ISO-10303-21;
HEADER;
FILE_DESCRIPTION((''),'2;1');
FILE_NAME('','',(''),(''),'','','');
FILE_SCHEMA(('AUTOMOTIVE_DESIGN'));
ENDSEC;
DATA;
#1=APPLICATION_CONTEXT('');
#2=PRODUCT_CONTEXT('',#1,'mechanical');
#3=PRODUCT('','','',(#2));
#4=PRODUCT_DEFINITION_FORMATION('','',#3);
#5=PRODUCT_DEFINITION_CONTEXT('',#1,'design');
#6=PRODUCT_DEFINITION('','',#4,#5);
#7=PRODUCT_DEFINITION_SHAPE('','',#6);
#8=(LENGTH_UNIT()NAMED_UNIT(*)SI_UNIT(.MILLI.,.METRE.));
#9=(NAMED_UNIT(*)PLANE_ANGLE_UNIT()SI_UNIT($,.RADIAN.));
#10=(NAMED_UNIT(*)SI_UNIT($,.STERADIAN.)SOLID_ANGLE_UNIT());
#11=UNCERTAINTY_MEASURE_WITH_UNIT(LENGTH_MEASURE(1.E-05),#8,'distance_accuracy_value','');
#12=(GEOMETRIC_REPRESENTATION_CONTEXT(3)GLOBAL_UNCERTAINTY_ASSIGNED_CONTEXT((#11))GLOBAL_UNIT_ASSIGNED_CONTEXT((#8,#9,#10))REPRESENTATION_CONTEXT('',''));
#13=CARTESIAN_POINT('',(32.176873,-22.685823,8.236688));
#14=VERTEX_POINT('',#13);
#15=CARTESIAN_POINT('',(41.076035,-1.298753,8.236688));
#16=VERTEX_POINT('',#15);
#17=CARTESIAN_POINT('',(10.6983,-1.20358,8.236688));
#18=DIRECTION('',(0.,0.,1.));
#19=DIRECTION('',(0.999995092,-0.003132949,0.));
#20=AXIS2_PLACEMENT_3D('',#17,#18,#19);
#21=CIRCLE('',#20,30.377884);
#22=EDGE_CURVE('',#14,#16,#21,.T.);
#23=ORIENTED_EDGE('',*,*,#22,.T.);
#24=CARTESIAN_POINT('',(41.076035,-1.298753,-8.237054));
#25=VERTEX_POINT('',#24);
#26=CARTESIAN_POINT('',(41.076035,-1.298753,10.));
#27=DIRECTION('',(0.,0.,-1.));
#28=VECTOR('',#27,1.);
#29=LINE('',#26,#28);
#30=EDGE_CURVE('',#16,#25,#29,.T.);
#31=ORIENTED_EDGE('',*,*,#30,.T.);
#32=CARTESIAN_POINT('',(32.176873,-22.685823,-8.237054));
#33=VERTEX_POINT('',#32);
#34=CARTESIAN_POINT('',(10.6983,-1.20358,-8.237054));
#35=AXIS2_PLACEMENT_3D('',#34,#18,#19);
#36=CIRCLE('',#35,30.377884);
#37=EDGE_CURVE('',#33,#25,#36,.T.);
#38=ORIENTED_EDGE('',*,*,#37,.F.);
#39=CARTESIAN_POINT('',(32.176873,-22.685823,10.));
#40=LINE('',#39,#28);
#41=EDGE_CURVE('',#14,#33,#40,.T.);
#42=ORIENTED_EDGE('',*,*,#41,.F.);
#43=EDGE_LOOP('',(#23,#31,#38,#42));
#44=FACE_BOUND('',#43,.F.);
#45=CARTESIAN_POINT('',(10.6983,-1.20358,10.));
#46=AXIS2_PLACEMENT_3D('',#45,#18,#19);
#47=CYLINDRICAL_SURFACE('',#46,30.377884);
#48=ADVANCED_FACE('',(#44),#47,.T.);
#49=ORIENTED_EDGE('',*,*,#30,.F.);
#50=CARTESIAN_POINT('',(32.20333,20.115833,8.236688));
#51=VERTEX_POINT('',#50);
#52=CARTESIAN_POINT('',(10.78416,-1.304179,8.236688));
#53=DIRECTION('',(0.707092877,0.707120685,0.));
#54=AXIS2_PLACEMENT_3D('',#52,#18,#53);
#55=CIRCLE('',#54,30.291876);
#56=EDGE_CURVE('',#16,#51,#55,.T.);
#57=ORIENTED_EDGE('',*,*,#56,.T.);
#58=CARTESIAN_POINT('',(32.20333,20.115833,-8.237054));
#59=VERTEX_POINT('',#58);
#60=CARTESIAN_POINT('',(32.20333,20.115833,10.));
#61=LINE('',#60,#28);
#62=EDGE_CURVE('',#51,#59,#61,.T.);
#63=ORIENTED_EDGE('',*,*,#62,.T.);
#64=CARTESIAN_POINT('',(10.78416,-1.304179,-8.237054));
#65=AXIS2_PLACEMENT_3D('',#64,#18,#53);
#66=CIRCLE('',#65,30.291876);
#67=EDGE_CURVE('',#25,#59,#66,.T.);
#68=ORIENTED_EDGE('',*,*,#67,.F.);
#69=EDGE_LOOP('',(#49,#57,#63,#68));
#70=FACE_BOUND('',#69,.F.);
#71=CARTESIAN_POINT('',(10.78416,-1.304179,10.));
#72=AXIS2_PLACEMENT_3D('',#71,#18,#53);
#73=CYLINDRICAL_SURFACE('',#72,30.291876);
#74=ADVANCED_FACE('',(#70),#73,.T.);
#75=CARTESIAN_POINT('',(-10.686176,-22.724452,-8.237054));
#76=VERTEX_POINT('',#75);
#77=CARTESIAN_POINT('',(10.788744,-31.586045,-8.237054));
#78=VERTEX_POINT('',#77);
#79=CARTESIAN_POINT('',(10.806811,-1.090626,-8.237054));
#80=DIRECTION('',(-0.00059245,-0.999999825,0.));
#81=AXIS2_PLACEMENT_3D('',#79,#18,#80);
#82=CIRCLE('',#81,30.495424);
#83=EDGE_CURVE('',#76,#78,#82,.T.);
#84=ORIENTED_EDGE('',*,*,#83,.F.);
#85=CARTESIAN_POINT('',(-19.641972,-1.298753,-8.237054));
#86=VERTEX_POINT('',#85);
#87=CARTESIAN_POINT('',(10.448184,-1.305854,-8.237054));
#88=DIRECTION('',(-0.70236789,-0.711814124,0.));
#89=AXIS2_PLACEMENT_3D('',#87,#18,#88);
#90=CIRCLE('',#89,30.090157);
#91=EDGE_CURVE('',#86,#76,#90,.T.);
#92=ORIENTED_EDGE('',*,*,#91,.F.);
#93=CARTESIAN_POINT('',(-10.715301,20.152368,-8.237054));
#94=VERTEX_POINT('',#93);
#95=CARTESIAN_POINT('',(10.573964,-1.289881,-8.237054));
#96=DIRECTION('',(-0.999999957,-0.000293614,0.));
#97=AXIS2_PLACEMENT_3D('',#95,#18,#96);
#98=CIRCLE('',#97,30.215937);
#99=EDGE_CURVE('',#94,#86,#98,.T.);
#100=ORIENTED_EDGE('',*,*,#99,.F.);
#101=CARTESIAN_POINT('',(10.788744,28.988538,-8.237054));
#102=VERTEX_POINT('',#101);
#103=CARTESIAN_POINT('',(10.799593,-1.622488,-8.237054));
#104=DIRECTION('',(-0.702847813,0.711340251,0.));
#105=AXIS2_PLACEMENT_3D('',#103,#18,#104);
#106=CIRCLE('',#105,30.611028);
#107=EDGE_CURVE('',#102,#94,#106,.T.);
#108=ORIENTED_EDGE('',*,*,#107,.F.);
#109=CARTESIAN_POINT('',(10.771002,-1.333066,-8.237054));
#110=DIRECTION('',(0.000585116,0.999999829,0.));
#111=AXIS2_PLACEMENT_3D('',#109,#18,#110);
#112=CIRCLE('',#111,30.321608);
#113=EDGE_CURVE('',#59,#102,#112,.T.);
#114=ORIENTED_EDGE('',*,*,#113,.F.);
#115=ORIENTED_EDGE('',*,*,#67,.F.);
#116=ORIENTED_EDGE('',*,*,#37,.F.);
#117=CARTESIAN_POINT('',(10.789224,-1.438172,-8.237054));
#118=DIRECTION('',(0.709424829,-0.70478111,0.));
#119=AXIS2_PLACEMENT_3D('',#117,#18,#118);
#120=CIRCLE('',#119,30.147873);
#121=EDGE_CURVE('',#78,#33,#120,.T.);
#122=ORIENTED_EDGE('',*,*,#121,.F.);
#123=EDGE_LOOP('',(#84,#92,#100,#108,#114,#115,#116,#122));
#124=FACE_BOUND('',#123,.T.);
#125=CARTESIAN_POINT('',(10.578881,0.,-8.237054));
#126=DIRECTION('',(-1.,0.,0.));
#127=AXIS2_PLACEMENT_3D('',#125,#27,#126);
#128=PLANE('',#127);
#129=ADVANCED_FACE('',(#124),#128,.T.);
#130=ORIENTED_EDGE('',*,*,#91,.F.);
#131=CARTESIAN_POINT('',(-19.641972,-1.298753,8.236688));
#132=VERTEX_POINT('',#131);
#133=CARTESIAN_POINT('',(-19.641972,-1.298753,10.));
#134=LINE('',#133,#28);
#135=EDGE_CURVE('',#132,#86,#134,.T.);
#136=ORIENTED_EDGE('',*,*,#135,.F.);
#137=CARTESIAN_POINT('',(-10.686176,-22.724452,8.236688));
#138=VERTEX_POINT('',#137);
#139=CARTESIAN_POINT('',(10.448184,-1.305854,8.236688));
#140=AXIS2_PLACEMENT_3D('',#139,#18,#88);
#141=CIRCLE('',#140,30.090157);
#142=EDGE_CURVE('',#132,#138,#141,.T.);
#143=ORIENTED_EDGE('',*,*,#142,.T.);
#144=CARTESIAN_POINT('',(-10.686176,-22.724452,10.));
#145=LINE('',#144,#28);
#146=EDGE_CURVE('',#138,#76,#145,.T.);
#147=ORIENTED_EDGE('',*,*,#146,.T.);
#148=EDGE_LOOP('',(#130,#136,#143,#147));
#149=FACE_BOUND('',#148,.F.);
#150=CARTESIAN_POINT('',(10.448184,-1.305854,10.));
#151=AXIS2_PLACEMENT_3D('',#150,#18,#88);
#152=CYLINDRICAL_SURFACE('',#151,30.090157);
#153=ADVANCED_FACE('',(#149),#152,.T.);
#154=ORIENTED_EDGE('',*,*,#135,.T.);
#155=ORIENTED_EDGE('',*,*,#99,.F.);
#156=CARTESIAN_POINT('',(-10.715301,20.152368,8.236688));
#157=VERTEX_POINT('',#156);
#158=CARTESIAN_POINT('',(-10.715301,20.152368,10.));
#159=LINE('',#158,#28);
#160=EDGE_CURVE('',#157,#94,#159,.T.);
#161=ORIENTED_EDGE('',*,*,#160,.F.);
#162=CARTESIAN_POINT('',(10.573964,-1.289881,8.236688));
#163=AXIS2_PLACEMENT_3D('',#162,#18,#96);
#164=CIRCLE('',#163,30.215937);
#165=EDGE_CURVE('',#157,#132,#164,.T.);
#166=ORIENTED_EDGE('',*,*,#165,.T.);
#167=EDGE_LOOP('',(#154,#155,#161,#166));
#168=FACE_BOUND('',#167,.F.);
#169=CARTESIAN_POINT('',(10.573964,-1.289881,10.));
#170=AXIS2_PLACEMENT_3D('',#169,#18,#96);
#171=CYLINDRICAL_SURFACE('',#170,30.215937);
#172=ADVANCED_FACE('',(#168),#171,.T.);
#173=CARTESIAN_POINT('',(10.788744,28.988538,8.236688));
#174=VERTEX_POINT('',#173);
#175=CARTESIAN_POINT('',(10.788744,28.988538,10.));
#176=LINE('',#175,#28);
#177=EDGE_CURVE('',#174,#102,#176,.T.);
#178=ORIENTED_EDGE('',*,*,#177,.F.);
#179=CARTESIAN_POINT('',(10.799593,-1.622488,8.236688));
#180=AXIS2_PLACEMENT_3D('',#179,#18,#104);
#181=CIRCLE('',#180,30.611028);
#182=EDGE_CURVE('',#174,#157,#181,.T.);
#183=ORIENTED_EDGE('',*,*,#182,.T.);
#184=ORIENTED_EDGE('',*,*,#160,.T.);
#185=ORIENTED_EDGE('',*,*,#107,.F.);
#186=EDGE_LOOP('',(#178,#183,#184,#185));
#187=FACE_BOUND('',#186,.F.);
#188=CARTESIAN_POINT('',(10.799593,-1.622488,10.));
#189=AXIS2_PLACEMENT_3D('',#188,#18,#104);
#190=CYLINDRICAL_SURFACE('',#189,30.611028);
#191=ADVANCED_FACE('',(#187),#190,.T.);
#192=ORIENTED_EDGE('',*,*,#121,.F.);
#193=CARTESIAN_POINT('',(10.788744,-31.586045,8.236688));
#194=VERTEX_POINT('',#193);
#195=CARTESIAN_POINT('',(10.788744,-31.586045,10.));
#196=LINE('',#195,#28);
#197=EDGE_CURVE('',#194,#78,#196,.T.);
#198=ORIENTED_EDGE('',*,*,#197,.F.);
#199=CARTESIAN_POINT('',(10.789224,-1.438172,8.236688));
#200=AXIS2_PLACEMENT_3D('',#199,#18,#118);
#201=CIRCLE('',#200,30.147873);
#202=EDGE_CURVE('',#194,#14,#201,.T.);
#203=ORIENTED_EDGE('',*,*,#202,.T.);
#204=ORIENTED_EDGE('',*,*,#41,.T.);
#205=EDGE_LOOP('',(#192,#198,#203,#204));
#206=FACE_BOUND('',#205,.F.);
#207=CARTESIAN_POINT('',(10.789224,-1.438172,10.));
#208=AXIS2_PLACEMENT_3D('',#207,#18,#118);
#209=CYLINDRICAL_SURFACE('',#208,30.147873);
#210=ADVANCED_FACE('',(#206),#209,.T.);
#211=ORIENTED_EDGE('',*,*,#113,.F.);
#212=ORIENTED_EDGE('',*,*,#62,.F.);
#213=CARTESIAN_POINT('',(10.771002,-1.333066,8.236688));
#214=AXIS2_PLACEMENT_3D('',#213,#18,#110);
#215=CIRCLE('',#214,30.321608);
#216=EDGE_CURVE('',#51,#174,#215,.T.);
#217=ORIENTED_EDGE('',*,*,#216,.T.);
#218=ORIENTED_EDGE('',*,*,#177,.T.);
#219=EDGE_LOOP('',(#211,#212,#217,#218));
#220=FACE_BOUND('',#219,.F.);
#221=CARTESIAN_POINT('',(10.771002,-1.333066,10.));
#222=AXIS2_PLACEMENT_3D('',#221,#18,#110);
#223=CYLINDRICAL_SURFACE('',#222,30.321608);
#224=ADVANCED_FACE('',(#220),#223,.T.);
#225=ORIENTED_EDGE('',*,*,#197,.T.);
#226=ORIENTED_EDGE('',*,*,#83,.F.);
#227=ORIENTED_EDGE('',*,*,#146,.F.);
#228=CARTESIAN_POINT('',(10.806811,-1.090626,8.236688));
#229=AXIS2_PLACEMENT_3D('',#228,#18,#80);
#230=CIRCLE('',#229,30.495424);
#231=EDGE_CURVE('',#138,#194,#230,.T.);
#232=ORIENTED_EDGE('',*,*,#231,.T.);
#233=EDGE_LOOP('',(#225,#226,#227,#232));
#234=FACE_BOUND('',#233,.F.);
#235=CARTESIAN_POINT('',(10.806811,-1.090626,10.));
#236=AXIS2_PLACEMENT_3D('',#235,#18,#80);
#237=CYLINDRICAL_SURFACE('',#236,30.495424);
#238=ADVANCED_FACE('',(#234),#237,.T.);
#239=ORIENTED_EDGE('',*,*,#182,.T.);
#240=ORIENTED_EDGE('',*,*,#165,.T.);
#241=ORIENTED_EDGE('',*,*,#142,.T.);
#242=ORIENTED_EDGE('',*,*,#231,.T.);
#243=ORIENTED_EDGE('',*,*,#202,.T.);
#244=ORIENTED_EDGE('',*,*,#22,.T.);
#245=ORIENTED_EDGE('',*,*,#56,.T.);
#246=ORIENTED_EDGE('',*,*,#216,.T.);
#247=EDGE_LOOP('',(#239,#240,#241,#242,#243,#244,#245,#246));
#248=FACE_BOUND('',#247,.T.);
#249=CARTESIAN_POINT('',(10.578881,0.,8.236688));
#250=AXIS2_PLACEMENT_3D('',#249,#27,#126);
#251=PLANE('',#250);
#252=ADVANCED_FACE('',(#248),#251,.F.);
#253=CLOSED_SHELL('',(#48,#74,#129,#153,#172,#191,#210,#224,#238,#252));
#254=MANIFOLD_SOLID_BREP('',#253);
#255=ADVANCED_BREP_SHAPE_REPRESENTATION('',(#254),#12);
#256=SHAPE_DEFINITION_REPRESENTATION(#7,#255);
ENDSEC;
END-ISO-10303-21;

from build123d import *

# Parameters (mm, degrees)
F3_W     = 421.7902910393
F3_H     = 198.2180179606
F4_DEPTH = 25.4


# Not quite as in the source:
# - ends of sketch curves that miss each other by under 0.0002 mm in the source are joined


with BuildPart() as f1:
    # F0 (on Front) → F1 (revolve)
    with BuildSketch(Plane.XZ):
        with BuildLine():
            Line((10.5788812285, 8.2366884696), (-24.2557799278, 8.2366884696))
            Line((-24.2557799278, 8.2366884696), (-24.6392214836, 8.2366884696))
            ThreePointArc((-24.6392214836, 8.2366884696), (-32.6864160689, -0.0082121834), (-24.6228011914, -8.2370543))
            Line((-24.6228011914, -8.2370543), (-24.27220022, -8.2370543))
            Line((-24.27220022, -8.2370543), (10.5788812285, -8.2370543))
            Line((10.5788812285, -8.2370543), (10.5788812285, 8.2366884696))
        make_face()
    revolve(axis=Axis((10.5788812285, 0, -0.0001829152), (0, 0, -1)))

    # F3 (on offset) → F4 (cut)
    with BuildSketch(Plane.XY.offset(10)):
        Rectangle(F3_W, F3_H)
        with BuildLine():
            ThreePointArc((-10.7153009133, 20.1523680538), (-0.8347905086, 26.6913979084), (10.7887436299, 28.9885377447))
            ThreePointArc((10.7887436299, 28.9885377447), (22.3773621495, 26.6792950108), (32.203329708, 20.1158334422))
            ThreePointArc((32.203329708, 20.1158334422), (38.769051111, 10.2908037813), (41.0760354322, -1.2987526262))
            ThreePointArc((41.0760354322, -1.2987526262), (38.7450627408, -12.8738402066), (32.1768729102, -22.6858234277))
            ThreePointArc((32.1768729102, -22.6858234277), (22.3718072579, -29.2722876696), (10.7887436292, -31.5860449158))
            ThreePointArc((10.7887436292, -31.5860449158), (-0.8256146846, -29.2802975648), (-10.6861755573, -22.7244524913))
            ThreePointArc((-10.6861755573, -22.7244524913), (-17.3142524075, -12.9103633574), (-19.6419716109, -1.2987526263))
            ThreePointArc((-19.6419716109, -1.2987526263), (-17.3228833961, 10.3191134223), (-10.7153009133, 20.1523680538))
        make_face(mode=Mode.SUBTRACT)
    extrude(amount=-F4_DEPTH, mode=Mode.SUBTRACT)


solid = f1.part
